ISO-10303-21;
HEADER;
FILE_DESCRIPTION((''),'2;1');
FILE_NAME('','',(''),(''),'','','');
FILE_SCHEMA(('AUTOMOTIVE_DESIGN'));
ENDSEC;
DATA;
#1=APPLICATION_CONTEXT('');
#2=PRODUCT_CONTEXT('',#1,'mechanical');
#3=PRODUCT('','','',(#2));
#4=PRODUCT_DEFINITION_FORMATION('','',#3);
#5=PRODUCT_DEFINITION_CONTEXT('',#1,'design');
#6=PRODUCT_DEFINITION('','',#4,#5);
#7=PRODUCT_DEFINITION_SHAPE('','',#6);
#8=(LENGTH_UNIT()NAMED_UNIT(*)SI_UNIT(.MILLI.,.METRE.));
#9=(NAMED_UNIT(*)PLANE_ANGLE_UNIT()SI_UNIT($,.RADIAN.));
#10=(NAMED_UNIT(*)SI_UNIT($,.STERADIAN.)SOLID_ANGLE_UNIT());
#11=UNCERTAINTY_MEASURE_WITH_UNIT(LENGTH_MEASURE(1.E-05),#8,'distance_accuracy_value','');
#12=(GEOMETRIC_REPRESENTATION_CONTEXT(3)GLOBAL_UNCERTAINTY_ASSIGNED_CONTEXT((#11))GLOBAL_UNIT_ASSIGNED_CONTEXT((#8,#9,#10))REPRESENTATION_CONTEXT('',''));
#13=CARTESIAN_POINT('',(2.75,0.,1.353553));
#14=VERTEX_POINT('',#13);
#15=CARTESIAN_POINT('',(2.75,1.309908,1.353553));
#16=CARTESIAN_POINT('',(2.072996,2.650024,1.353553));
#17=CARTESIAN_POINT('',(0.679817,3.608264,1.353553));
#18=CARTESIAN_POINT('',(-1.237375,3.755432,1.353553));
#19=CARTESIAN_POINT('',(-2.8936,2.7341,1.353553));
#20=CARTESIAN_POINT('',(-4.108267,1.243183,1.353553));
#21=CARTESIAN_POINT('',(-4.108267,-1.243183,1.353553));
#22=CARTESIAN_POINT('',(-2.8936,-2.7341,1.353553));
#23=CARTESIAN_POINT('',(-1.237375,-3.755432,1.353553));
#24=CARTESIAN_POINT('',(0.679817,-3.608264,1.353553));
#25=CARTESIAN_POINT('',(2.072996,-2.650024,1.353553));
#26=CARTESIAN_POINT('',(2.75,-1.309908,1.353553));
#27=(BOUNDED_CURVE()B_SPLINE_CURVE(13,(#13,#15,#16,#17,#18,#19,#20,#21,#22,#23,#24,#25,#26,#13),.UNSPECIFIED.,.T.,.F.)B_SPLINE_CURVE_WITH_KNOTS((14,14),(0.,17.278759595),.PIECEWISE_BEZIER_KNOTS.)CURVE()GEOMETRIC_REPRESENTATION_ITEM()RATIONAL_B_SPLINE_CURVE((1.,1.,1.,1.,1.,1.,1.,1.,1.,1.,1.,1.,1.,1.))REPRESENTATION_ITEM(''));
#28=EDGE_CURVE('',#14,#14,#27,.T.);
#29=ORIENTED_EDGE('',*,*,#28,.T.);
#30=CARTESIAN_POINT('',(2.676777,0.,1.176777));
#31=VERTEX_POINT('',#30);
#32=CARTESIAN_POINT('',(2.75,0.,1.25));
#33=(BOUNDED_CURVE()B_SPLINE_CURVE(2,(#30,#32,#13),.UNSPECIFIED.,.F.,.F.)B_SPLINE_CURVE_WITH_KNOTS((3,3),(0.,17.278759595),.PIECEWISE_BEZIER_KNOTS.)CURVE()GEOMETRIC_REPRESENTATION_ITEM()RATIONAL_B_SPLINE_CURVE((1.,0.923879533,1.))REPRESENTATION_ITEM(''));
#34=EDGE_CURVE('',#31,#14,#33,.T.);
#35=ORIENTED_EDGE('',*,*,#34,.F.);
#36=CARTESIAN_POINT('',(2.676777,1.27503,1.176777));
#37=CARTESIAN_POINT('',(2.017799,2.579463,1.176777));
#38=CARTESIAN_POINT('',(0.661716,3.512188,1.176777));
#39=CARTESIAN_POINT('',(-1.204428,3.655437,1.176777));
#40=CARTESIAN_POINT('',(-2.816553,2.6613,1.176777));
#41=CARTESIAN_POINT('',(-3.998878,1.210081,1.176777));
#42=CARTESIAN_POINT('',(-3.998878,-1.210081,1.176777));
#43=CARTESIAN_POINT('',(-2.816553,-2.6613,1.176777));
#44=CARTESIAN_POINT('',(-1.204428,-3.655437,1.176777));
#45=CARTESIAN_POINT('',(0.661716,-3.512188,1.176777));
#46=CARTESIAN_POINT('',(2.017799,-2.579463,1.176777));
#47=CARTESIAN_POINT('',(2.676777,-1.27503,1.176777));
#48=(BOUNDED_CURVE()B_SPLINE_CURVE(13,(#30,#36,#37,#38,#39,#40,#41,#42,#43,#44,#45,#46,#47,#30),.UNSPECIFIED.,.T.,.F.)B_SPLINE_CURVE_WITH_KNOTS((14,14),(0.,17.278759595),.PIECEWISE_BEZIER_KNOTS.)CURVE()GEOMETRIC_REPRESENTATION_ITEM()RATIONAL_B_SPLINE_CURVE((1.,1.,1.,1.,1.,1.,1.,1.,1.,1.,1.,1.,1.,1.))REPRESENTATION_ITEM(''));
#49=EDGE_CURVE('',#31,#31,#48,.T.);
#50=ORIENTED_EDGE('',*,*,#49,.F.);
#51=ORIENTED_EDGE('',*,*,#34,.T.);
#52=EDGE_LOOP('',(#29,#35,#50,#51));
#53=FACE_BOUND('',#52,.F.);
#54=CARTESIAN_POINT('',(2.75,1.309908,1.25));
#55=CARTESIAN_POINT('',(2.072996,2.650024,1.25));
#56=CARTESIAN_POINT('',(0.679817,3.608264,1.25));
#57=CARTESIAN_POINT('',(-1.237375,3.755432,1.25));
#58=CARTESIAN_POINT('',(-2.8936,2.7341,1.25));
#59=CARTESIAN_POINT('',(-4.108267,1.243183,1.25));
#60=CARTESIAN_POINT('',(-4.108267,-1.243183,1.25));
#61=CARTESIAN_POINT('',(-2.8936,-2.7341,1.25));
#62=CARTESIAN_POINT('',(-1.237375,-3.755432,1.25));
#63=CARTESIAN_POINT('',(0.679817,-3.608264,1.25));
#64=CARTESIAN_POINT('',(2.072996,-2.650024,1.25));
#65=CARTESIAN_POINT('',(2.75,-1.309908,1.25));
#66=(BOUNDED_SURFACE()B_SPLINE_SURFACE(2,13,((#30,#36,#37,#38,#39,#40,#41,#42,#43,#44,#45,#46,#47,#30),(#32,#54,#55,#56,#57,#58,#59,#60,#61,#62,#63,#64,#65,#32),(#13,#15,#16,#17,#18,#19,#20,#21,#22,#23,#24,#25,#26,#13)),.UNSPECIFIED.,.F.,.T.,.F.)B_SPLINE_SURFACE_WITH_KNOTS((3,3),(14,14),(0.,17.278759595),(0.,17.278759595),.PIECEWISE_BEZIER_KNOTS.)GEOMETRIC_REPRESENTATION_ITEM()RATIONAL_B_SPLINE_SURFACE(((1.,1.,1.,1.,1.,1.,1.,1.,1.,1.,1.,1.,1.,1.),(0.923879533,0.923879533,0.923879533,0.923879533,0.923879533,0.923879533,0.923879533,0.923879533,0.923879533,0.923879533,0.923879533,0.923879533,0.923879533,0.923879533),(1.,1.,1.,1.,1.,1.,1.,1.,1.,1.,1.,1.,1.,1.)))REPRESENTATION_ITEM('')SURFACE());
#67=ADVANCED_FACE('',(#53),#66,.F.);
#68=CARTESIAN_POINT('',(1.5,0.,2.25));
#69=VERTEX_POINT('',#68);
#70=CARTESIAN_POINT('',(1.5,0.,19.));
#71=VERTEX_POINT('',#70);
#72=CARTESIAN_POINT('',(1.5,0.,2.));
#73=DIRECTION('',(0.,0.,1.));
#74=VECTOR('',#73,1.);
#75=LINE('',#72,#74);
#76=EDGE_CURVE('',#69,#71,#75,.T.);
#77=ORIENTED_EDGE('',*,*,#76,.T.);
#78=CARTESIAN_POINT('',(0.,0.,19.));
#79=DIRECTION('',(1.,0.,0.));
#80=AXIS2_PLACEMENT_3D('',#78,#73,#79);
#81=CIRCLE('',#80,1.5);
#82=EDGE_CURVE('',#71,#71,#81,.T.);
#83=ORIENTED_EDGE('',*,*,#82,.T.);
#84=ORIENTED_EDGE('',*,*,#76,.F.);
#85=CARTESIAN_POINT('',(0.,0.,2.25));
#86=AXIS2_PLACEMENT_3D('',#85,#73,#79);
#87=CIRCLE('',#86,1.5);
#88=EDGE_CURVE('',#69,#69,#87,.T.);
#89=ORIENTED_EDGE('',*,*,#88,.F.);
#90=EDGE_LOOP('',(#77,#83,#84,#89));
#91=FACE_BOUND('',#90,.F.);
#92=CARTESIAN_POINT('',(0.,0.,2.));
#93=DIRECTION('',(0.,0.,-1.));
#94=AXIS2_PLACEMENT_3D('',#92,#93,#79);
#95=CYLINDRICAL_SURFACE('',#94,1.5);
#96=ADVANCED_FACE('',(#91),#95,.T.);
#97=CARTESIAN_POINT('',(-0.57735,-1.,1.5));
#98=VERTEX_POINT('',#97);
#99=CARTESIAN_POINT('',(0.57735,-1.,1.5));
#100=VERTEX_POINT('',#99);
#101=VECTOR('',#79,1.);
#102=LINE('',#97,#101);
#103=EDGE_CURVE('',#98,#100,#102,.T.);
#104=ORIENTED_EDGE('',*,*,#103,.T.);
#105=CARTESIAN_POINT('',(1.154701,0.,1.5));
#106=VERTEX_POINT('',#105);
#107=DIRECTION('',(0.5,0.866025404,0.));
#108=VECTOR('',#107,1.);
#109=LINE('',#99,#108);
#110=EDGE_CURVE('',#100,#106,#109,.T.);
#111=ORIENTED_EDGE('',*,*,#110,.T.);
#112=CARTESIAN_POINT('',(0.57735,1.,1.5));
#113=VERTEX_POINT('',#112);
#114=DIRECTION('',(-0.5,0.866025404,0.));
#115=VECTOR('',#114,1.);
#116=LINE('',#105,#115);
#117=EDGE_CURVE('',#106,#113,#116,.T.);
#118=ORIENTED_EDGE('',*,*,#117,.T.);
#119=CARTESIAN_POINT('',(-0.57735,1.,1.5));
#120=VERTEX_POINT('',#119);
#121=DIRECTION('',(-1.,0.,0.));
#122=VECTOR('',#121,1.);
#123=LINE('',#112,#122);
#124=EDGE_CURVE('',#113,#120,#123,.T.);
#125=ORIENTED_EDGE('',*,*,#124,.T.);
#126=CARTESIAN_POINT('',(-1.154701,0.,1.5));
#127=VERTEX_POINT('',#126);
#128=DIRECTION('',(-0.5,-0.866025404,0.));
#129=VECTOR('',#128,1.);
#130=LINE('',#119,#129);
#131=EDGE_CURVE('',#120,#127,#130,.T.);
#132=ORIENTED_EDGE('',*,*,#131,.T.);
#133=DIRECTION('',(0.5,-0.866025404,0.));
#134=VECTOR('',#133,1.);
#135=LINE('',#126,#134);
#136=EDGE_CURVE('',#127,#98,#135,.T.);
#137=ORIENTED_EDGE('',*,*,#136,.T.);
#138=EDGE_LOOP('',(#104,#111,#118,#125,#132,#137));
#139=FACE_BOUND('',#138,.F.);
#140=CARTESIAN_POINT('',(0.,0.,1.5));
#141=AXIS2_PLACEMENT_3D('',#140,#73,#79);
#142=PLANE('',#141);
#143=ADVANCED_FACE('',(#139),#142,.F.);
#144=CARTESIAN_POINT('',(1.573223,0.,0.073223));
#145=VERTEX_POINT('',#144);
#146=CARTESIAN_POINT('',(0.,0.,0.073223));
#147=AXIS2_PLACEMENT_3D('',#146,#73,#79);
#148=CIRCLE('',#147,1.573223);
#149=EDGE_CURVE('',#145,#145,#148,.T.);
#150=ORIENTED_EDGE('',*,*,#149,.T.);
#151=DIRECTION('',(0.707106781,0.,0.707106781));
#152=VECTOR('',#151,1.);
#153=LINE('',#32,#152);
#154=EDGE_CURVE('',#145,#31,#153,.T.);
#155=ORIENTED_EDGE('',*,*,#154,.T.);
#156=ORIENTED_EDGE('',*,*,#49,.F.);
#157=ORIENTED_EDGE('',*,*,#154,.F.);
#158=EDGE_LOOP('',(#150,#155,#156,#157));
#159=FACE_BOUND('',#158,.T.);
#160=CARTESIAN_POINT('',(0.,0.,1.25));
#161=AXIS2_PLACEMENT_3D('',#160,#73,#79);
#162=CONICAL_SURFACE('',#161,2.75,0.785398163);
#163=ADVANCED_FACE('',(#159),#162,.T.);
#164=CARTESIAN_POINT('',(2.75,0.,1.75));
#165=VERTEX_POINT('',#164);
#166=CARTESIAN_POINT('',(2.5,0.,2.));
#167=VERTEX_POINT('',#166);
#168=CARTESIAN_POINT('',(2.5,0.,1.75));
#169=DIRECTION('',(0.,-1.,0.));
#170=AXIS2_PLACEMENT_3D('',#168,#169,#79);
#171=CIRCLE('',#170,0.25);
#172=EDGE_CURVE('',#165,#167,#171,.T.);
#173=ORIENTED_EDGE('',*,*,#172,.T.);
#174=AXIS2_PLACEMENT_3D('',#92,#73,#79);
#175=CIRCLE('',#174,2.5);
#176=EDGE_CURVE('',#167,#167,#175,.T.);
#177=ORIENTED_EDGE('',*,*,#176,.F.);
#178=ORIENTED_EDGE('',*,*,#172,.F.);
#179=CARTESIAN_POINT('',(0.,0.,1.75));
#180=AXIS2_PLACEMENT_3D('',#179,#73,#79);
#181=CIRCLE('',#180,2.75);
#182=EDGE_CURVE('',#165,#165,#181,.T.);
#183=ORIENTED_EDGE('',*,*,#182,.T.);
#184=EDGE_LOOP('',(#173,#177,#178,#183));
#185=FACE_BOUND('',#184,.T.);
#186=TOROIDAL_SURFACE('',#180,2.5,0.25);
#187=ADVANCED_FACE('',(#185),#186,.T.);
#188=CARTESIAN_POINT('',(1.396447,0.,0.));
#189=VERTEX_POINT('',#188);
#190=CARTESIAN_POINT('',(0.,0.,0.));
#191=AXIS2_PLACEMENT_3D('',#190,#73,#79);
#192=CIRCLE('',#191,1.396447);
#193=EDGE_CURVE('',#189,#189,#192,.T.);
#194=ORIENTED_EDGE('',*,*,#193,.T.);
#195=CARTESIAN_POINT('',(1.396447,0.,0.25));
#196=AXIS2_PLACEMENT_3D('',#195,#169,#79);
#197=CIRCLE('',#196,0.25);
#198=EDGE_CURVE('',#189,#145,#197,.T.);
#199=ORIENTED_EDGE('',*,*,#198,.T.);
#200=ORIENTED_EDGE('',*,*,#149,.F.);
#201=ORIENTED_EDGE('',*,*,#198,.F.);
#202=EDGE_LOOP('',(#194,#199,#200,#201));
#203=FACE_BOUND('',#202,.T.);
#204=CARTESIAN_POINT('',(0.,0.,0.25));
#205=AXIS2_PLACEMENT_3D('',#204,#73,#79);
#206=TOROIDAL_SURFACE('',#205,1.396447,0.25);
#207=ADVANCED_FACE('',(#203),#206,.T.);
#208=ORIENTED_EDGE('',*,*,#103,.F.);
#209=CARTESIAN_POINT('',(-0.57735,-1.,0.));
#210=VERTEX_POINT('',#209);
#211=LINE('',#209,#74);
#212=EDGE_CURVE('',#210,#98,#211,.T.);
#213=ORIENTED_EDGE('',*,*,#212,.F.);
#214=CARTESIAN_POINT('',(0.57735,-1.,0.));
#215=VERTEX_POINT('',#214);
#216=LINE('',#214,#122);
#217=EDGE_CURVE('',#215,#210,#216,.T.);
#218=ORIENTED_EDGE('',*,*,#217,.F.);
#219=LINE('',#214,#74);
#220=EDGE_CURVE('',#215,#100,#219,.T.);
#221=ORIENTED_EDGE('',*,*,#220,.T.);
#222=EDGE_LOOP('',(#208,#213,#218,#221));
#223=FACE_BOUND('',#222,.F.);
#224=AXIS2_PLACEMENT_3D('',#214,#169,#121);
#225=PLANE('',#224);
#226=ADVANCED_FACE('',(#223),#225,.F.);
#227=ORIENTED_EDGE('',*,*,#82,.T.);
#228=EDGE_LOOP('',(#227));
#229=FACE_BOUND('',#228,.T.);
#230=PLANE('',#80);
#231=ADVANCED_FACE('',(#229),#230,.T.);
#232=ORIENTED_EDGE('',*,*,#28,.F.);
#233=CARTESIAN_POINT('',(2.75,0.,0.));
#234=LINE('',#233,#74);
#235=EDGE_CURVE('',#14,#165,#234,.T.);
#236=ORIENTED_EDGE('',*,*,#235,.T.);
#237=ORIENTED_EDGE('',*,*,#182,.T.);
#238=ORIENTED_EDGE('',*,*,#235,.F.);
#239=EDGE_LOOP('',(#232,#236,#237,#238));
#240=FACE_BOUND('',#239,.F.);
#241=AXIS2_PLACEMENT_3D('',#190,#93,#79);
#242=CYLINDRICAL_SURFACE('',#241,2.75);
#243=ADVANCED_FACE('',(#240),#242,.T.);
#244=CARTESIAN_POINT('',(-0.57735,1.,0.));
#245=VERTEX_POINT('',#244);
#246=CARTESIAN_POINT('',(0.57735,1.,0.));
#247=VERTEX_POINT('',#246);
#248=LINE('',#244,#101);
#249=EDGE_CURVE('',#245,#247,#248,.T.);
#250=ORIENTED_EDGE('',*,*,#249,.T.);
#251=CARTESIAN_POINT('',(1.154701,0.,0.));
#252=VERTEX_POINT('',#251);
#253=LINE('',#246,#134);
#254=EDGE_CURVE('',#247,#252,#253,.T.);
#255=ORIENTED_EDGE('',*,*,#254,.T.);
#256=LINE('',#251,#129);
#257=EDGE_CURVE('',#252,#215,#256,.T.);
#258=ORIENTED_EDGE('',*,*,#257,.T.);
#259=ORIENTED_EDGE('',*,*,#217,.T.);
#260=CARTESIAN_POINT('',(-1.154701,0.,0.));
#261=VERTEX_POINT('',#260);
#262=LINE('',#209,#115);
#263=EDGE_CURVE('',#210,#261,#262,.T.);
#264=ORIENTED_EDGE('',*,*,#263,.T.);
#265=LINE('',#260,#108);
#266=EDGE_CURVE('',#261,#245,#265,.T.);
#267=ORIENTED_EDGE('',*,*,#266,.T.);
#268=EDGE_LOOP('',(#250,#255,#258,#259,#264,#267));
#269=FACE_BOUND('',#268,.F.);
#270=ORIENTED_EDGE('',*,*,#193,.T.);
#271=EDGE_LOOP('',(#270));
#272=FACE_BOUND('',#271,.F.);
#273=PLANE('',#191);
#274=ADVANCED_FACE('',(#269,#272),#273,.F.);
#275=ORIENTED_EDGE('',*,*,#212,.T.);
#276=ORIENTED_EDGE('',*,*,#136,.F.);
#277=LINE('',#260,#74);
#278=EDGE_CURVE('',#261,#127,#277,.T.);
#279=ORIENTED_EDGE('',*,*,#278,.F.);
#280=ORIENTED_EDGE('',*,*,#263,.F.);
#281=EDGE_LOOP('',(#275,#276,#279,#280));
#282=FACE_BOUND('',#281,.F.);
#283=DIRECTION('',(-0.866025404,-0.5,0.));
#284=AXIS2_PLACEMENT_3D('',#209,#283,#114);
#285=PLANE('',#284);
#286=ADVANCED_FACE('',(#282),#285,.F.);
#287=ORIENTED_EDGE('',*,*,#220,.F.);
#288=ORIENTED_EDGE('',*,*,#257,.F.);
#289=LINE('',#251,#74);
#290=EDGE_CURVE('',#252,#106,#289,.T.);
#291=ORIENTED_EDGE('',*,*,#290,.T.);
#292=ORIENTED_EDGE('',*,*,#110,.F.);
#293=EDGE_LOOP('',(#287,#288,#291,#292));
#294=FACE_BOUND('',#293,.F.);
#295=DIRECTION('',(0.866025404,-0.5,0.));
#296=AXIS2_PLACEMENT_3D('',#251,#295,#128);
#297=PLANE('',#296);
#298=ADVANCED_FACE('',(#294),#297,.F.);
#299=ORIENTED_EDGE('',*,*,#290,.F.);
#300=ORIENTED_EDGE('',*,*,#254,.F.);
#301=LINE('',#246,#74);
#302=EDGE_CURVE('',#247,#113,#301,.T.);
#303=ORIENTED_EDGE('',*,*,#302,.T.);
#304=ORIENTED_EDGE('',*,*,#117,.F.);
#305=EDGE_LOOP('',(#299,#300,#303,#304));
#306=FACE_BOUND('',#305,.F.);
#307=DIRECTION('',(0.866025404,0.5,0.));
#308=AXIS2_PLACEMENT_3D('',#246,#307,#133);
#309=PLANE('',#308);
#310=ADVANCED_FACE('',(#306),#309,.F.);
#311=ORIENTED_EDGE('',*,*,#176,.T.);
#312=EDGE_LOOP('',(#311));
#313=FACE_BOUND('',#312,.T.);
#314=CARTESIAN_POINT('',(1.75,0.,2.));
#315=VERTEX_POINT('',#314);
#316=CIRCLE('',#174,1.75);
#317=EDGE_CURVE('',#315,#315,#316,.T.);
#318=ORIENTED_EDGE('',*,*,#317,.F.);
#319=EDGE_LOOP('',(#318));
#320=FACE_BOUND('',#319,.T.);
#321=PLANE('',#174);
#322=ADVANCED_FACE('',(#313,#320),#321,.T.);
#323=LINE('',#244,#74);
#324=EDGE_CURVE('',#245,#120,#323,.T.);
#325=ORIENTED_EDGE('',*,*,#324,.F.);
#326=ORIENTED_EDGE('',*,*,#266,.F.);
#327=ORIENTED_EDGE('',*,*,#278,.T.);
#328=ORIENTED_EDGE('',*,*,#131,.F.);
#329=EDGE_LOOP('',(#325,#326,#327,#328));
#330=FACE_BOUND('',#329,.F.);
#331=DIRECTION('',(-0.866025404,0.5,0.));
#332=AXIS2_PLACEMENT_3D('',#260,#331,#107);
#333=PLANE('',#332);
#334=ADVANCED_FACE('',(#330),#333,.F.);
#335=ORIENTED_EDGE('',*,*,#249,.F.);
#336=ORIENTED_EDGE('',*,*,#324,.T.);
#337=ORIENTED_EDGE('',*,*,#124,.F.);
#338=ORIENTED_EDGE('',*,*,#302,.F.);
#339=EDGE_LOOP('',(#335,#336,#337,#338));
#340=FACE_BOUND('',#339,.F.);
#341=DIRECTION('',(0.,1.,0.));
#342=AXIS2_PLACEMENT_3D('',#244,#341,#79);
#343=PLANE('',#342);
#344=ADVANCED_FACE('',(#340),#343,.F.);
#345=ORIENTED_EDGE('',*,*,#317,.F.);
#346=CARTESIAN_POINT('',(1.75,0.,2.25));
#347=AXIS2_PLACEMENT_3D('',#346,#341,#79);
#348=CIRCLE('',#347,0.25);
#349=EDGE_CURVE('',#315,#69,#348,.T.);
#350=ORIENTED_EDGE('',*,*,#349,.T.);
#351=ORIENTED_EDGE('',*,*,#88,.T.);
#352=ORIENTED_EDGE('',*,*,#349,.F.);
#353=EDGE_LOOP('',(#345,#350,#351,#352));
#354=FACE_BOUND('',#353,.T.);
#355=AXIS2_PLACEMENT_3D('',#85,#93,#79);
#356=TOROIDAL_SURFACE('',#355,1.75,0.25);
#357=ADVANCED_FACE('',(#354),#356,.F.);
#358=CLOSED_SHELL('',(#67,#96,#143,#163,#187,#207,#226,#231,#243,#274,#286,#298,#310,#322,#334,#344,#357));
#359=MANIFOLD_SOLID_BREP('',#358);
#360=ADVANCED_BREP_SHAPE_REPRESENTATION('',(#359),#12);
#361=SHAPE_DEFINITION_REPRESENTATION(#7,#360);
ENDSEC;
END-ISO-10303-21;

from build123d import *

# Parameters (mm, degrees)
F1_R     = 2.75
F1_R_2   = 1.5
F2_DEPTH = 2
F3_START = 1.5
F3_DEPTH = 0.5
F4_START = 2
F4_DEPTH = 17
F5_SIZE2 = 1.25
F5_SIZE  = 1.25
F6_R     = 0.25


# Not quite as in the source:
# - a feature names something its author has since deleted; it is built from what else it names


with BuildPart() as f2:
    # F1 (on Top) → F2 (new body)
    with BuildSketch(Plane.XY):
        Circle(F1_R)
        Circle(F1_R_2, mode=Mode.SUBTRACT)
        Circle(F1_R_2)
        Polygon((-0.5773502692, -1), (-1.1547005384, 0), (-0.5773502692, 1), (0.5773502692, 1), (1.1547005384, 0), (0.5773502692, -1), align=None, mode=Mode.SUBTRACT)
    extrude(amount=F2_DEPTH)

    # F1 (on Top) → F3 (join)
    with BuildSketch(Plane.XY.offset(F3_START)):
        Polygon((-0.5773502692, 1), (-1.1547005384, 0), (-0.5773502692, -1), (0.5773502692, -1), (1.1547005384, 0), (0.5773502692, 1), align=None)
    extrude(amount=F3_DEPTH)

    # F1 (on Top) → F4 (join)
    with BuildSketch(Plane.XY.offset(F4_START)):
        Circle(F1_R_2)
        Polygon((-0.5773502692, -1), (-1.1547005384, 0), (-0.5773502692, 1), (0.5773502692, 1), (1.1547005384, 0), (0.5773502692, -1), align=None, mode=Mode.SUBTRACT)
        Polygon((-0.5773502692, 1), (-1.1547005384, 0), (-0.5773502692, -1), (0.5773502692, -1), (1.1547005384, 0), (0.5773502692, 1), align=None)
    extrude(amount=F4_DEPTH)

    # F5
    f5_edges = [f2.edges().sort_by_distance(p)[0] for p in [
        (-2.75, 0, 0),
    ]]
    chamfer(f5_edges, length=F5_SIZE, length2=F5_SIZE2)

    # F6
    f6_edges = [f2.edges().sort_by_distance(p)[0] for p in [
        (-2.75, 0, 2),
        (-1.5, 0, 2),
        (-1.5, 0, 0),
        (-2.75, 0, 1.25),
    ]]
    fillet(f6_edges, radius=F6_R)


solid = f2.part
